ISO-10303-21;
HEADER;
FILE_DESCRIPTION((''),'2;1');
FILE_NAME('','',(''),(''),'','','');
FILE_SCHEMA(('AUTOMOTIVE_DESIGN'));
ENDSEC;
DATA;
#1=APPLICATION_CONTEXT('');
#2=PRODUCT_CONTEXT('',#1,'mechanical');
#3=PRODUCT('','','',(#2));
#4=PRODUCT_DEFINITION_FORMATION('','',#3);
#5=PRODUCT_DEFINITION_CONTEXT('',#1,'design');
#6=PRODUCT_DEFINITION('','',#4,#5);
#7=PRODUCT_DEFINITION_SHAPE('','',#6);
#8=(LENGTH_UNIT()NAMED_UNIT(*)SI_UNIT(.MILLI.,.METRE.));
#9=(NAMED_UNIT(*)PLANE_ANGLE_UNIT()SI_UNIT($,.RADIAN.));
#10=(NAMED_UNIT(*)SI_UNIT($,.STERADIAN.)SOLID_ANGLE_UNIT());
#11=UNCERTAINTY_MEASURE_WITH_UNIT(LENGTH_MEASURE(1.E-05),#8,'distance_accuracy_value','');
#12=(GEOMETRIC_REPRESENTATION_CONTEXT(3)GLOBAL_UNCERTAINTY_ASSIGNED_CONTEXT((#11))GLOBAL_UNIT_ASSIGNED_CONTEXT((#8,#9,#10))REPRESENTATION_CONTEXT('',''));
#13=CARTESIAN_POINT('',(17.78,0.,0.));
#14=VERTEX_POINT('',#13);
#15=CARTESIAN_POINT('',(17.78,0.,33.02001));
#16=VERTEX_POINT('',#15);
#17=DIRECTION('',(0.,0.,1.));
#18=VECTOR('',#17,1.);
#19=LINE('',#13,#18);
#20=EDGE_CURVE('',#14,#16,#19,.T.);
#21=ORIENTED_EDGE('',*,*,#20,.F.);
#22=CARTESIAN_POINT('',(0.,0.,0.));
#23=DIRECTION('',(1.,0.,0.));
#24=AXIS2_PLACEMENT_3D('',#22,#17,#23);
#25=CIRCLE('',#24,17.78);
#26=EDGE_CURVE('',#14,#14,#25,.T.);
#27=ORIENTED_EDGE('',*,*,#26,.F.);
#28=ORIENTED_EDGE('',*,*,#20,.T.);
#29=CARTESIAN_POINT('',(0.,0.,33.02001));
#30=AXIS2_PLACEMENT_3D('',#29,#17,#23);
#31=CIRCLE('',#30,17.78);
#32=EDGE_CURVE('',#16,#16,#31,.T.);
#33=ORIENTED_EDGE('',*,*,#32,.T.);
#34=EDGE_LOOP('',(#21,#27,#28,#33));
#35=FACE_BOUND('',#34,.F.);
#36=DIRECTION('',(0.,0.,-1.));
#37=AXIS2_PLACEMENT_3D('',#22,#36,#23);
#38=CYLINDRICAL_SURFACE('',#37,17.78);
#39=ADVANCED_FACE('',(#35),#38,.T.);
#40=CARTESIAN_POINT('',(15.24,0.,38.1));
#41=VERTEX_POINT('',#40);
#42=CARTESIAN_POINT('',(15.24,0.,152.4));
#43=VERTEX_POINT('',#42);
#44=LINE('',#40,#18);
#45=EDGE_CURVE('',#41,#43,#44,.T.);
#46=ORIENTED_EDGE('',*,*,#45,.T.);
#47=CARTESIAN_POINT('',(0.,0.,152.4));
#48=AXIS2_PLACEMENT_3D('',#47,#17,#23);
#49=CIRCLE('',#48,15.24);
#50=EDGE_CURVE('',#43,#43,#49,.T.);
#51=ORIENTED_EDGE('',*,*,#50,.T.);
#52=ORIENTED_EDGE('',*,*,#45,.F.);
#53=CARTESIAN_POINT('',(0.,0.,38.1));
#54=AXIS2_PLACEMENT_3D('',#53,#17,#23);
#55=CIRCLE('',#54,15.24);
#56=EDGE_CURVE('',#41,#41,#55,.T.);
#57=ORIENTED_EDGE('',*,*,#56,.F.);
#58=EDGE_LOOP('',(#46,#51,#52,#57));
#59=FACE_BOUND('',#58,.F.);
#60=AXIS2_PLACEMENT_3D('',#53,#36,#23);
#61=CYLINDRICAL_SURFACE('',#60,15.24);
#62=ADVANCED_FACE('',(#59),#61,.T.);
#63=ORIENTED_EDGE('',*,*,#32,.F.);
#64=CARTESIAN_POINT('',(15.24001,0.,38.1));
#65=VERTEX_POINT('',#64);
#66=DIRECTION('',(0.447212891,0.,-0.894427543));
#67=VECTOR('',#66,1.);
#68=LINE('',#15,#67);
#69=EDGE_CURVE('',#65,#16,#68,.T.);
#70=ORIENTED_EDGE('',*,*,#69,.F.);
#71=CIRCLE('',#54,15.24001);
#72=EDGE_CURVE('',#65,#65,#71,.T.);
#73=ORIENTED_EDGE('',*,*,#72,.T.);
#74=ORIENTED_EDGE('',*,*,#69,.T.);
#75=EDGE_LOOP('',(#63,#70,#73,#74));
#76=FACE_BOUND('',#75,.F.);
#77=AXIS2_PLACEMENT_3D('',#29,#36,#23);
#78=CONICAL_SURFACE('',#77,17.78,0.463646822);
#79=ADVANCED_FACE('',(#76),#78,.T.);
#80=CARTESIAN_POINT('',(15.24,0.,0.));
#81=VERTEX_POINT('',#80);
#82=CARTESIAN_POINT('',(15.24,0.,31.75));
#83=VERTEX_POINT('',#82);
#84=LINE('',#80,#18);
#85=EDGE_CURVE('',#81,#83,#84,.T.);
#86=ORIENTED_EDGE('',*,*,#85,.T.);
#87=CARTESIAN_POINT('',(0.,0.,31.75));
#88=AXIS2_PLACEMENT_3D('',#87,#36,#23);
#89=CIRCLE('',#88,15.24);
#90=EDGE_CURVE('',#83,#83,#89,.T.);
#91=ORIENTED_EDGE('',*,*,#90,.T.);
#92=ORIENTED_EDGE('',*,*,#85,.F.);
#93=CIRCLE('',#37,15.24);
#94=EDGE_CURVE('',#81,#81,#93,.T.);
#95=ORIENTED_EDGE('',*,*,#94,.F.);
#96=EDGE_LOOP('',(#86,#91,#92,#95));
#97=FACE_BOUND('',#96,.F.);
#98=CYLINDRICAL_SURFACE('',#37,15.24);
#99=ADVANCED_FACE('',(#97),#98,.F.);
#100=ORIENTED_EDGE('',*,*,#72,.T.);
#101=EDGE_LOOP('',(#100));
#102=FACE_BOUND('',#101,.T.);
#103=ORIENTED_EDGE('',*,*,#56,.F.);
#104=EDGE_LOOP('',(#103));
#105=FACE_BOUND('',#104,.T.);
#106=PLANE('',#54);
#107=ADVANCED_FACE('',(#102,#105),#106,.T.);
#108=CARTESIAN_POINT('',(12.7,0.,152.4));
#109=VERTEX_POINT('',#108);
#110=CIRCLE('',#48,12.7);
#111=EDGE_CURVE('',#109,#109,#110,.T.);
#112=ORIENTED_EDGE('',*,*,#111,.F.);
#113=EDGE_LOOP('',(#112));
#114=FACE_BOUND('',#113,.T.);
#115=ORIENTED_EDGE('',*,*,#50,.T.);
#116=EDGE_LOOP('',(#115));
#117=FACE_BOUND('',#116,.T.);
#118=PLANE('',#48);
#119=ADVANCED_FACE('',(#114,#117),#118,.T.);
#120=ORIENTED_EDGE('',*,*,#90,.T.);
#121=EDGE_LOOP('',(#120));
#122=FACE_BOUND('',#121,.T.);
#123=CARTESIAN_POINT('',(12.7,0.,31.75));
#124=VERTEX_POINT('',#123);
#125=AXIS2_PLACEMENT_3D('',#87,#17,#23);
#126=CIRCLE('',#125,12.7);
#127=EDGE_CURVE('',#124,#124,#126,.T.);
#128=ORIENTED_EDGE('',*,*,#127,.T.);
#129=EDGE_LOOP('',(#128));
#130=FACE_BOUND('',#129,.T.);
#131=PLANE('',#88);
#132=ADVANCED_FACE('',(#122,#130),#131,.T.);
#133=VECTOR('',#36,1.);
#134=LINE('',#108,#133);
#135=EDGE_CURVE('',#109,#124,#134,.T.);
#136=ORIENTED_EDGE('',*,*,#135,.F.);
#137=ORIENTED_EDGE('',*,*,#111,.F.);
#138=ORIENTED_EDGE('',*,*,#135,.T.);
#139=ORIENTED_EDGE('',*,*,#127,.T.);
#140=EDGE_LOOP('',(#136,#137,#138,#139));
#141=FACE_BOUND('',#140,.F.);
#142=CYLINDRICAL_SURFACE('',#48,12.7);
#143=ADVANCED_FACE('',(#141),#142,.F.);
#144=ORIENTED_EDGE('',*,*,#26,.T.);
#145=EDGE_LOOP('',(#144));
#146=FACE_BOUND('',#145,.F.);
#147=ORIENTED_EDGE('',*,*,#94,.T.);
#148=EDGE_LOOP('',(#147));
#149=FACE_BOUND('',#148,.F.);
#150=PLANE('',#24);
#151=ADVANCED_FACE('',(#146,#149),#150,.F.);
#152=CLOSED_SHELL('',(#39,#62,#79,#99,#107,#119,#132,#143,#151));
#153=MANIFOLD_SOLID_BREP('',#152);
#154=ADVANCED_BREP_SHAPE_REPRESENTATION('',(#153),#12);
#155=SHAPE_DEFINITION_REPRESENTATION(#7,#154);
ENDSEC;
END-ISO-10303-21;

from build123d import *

# Parameters (mm, degrees)
F0_R     = 17.78
F1_DEPTH = 38.1
F2_R     = 15.24
F3_DEPTH = 114.3
F4_R     = 15.24
F5_DEPTH = 31.75
F6_R     = 12.7
F7_DEPTH = 127
F8_SIZE2 = 5.07999
F8_SIZE  = 2.53999


# Not quite as in the source:
# - a fillet or chamfer is up to 0.001 mm smaller than in the source, because OpenCascade refuses the exact size


with BuildPart() as f1:
    # F0 (on Top) → F1 (new body)
    with BuildSketch(Plane.XY):
        Circle(F0_R)
    extrude(amount=F1_DEPTH)

    # F2 (on face) → F3 (join)
    with BuildSketch(Plane.XY.offset(38.1)):
        Circle(F2_R)
    extrude(amount=F3_DEPTH)

    # F4 (on face) → F5 (cut)
    with BuildSketch(Plane(origin=(0, 0, 0), x_dir=(1, 0, 0), z_dir=(0, 0, -1))):
        Circle(F4_R)
    extrude(amount=-F5_DEPTH, mode=Mode.SUBTRACT)

    # F6 (on face) → F7 (cut)
    with BuildSketch(Plane.XY.offset(152.4)):
        Circle(F6_R)
    extrude(amount=-F7_DEPTH, mode=Mode.SUBTRACT)

    # F8 (size 2.54 and 5.08 in the source; OpenCascade refuses exactly that, so slightly less here)
    f8_edges = [f1.edges().sort_by_distance(p)[0] for p in [
        (-17.78, 0, 38.1),
    ]]
    f8_side = f1.faces().sort_by_distance((-17.277106, 0, 38.1))[0]
    chamfer(f8_edges, length=F8_SIZE, length2=F8_SIZE2, reference=f8_side)


solid = f1.part
